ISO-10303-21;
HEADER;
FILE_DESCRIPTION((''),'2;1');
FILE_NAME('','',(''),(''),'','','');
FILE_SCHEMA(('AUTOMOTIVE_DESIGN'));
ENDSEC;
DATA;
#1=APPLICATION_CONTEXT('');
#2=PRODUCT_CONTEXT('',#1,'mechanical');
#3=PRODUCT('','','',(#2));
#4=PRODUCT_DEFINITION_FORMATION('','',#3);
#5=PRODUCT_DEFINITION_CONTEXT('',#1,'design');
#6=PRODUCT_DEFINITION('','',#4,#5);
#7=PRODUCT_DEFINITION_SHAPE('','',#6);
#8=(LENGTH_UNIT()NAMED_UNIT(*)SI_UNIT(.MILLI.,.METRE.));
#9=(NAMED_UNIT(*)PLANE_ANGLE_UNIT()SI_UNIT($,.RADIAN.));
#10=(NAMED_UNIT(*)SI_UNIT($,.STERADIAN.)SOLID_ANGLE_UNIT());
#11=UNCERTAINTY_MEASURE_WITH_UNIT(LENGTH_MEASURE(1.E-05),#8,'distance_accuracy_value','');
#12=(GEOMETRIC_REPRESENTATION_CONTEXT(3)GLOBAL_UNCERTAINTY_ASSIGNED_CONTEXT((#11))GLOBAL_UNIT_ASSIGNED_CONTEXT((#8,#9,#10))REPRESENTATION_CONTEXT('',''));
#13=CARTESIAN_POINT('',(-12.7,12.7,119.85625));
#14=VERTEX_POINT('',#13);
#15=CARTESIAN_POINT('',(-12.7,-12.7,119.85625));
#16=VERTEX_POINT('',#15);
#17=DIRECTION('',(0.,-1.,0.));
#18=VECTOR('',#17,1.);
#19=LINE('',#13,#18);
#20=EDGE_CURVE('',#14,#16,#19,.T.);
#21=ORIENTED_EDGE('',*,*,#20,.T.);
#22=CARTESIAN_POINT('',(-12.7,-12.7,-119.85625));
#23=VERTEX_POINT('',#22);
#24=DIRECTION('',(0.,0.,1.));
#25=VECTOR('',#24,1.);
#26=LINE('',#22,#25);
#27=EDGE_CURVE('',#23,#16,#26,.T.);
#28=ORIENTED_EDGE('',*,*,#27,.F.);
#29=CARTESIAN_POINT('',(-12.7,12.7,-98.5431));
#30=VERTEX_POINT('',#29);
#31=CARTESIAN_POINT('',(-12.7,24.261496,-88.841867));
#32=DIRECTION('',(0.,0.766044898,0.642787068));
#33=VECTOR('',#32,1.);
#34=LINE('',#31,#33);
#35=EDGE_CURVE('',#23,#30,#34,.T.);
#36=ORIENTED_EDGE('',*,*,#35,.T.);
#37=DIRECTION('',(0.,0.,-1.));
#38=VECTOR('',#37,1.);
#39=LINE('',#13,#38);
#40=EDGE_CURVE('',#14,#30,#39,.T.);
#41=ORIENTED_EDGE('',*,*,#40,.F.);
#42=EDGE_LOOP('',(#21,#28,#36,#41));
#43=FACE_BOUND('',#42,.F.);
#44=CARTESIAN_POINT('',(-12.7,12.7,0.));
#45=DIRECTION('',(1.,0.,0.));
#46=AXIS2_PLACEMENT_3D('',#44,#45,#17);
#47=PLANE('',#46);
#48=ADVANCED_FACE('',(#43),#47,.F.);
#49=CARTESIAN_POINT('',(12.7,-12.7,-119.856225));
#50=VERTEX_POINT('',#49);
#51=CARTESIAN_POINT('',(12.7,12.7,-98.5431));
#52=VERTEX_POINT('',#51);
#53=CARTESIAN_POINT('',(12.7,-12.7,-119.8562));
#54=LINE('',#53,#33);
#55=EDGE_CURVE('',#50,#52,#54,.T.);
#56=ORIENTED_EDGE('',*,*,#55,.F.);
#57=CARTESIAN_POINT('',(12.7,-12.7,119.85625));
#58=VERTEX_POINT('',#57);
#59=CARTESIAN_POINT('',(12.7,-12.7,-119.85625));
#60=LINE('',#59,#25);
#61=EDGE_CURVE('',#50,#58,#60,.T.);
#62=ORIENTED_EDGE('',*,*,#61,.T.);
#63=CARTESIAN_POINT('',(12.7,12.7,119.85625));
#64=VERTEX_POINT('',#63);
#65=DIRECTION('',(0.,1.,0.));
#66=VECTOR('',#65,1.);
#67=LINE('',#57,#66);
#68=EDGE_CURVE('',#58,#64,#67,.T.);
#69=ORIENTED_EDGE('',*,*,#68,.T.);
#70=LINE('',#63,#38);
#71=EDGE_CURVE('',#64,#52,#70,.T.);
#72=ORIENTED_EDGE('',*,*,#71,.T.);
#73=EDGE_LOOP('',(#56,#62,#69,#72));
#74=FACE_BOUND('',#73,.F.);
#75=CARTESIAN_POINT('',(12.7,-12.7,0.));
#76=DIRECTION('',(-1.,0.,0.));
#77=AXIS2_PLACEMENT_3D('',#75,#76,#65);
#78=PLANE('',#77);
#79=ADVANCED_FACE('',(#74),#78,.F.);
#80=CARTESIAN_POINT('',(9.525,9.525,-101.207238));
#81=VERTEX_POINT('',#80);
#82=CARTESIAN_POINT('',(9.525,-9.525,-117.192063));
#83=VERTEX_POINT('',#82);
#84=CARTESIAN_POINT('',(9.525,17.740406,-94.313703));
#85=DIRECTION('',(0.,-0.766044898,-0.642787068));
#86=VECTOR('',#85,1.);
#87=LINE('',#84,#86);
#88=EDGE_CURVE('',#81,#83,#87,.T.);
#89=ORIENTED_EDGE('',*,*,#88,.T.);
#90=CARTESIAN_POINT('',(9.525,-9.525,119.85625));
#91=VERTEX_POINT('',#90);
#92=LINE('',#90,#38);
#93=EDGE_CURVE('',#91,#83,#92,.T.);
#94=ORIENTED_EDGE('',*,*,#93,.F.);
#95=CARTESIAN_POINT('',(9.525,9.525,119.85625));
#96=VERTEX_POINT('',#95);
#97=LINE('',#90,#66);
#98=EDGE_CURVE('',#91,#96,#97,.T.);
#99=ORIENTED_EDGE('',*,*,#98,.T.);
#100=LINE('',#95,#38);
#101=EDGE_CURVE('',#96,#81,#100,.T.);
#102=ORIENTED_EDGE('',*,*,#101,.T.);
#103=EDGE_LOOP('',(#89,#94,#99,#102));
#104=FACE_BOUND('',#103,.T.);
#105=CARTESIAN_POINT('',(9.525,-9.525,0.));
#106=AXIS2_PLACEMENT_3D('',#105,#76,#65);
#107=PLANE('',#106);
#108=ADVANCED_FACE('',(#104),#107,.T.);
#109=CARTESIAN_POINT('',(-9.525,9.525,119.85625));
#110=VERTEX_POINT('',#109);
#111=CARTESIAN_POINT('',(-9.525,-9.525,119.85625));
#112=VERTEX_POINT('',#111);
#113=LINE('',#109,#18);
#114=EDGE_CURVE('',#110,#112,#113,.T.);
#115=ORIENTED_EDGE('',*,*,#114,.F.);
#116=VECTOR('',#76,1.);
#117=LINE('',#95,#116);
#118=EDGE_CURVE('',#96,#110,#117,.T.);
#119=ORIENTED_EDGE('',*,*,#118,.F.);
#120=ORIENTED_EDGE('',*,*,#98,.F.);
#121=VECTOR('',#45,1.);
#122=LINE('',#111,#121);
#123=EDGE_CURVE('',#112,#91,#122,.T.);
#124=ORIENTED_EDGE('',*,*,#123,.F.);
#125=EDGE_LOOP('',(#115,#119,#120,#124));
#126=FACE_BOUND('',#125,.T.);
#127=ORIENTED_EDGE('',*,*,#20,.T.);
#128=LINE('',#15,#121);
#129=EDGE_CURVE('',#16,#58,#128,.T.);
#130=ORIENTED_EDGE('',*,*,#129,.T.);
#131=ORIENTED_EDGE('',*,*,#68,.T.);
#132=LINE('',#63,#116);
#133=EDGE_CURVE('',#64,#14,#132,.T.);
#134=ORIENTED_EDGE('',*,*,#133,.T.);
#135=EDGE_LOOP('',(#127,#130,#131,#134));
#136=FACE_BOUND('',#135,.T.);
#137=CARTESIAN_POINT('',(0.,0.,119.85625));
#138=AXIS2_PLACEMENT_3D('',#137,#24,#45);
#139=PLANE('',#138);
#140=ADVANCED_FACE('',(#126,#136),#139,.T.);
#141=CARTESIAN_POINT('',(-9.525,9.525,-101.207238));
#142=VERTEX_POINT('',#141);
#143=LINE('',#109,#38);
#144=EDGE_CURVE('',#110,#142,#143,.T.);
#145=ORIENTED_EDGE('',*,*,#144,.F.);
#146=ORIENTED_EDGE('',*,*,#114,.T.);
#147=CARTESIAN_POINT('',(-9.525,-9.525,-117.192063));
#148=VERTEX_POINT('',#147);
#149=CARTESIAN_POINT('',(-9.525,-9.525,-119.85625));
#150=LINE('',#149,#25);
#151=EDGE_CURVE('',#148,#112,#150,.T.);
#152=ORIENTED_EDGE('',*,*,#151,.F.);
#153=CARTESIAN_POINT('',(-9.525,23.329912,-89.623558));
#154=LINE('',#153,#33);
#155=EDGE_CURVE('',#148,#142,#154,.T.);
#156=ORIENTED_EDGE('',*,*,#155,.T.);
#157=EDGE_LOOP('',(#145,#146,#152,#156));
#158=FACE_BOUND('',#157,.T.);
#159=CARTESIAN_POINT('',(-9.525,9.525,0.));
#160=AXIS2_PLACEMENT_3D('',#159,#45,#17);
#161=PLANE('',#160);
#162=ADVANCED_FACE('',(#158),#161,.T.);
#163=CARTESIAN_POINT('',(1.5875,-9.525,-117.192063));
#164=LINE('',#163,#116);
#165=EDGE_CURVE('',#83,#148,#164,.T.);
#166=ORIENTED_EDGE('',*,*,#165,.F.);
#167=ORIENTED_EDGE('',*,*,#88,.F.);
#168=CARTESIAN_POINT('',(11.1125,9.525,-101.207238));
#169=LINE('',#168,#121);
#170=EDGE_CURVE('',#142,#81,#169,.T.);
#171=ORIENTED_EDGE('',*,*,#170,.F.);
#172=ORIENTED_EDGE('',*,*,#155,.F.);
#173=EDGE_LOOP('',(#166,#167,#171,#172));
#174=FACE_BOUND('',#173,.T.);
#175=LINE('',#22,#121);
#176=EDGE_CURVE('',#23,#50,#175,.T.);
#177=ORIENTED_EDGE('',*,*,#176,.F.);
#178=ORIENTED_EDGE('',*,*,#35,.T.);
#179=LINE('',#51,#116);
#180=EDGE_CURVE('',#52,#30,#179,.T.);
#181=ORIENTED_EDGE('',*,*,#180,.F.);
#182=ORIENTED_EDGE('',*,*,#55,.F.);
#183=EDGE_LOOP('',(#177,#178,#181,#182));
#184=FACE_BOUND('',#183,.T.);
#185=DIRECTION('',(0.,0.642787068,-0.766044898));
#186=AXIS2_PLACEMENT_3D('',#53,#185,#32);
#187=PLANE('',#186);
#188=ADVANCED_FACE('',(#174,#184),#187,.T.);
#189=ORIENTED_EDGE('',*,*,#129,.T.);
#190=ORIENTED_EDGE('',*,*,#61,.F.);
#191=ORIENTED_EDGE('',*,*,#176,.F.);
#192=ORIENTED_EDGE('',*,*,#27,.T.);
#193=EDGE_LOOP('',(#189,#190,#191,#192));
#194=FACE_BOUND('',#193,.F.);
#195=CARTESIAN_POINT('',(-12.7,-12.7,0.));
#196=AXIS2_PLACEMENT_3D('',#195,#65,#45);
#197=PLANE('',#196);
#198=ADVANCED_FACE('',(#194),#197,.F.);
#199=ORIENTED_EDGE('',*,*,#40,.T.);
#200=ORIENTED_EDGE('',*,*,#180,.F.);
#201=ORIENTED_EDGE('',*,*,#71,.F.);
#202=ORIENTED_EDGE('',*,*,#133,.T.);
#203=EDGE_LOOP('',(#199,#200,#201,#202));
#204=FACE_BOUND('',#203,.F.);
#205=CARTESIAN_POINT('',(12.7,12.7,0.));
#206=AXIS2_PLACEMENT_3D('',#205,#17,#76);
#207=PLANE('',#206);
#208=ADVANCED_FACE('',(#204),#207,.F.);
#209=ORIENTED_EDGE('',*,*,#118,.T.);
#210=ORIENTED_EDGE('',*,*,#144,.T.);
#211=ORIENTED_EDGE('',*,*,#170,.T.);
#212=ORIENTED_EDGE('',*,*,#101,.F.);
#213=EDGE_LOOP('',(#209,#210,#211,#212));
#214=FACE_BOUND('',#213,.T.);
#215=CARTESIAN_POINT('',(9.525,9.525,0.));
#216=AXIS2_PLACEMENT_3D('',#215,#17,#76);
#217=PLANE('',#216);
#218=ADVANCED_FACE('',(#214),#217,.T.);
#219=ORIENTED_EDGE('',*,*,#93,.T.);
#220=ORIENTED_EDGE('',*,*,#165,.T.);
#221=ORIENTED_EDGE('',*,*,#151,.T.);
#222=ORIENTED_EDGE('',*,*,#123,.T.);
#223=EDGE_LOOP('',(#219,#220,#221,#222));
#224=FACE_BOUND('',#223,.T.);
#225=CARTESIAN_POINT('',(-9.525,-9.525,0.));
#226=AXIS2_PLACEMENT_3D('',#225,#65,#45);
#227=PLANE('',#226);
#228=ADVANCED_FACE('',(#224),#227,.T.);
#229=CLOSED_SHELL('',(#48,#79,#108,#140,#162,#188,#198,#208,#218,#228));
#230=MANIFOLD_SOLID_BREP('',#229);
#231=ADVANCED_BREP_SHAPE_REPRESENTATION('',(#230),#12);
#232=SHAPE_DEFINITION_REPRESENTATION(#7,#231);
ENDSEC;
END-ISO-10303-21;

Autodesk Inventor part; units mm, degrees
ref_plane "YZ Plane" through (0, 0, 0) normal (1, 0, 0) x (0, 1, 0)
ref_plane "XZ Plane" through (0, 0, 0) normal (0, 1, 0) x (-1, 0, 0)
ref_plane "XY Plane" through (0, 0, 0) normal (0, 0, 1) x (1, 0, 0)
sketch "Sketch1" plane through (0, 0, 0) normal (0, 0, 1) x (1, 0, 0)
  line L0 (-12.7, -12.7) -> (12.7, -12.7)
  line L1 (12.7, -12.7) -> (12.7, 12.7)
  line L2 (12.7, 12.7) -> (-12.7, 12.7)
  line L3 (-12.7, 12.7) -> (-12.7, -12.7)
  line L4 (-12.7, -12.7) -> (12.7, 12.7) construction
  line L5 (12.7, -12.7) -> (-12.7, 12.7) construction
  line L6 (-9.525, -9.525) -> (9.525, -9.525)
  line L7 (9.525, -9.525) -> (9.525, 9.525)
  line L8 (9.525, 9.525) -> (-9.525, 9.525)
  line L9 (-9.525, 9.525) -> (-9.525, -9.525)
  line L10 (-9.525, -9.525) -> (9.525, 9.525) construction
  line L11 (9.525, -9.525) -> (-9.525, 9.525) construction
  point P0 (0, 0)
  dimension "d0" = 25.4
  dimension "d1" = 25.4
  dimension "d2" = 3.175
extrude "Extrusion1" add sketch "Sketch1" along normal mid plane 239.7125
sketch "Sketch4" plane through (12.7, -12.7, 119.8563) normal (1, 0, 0) x (0, 0, -1)
  line L0 (239.7125, 0) -> (239.7125, 25.4) projected
  line L1 (239.7125, 0) -> (218.3994, 25.4)
  line L2 (239.7125, 25.4) -> (0, 25.4) projected
  line L3 (218.3994, 25.4) -> (239.7125, 25.4)
  line L4 (0, 22.225) -> (239.7125, 22.225) projected
  line L5 (239.7125, 25.4) -> (239.7125, 0)
  point P0 (119.8563, 12.7)
  dimension "d9" = 40
extrude "Extrusion3" cut sketch "Sketch4" against normal through all
properties part number "Aluminum1x1MiddleFront" material "Aluminum 6061"
